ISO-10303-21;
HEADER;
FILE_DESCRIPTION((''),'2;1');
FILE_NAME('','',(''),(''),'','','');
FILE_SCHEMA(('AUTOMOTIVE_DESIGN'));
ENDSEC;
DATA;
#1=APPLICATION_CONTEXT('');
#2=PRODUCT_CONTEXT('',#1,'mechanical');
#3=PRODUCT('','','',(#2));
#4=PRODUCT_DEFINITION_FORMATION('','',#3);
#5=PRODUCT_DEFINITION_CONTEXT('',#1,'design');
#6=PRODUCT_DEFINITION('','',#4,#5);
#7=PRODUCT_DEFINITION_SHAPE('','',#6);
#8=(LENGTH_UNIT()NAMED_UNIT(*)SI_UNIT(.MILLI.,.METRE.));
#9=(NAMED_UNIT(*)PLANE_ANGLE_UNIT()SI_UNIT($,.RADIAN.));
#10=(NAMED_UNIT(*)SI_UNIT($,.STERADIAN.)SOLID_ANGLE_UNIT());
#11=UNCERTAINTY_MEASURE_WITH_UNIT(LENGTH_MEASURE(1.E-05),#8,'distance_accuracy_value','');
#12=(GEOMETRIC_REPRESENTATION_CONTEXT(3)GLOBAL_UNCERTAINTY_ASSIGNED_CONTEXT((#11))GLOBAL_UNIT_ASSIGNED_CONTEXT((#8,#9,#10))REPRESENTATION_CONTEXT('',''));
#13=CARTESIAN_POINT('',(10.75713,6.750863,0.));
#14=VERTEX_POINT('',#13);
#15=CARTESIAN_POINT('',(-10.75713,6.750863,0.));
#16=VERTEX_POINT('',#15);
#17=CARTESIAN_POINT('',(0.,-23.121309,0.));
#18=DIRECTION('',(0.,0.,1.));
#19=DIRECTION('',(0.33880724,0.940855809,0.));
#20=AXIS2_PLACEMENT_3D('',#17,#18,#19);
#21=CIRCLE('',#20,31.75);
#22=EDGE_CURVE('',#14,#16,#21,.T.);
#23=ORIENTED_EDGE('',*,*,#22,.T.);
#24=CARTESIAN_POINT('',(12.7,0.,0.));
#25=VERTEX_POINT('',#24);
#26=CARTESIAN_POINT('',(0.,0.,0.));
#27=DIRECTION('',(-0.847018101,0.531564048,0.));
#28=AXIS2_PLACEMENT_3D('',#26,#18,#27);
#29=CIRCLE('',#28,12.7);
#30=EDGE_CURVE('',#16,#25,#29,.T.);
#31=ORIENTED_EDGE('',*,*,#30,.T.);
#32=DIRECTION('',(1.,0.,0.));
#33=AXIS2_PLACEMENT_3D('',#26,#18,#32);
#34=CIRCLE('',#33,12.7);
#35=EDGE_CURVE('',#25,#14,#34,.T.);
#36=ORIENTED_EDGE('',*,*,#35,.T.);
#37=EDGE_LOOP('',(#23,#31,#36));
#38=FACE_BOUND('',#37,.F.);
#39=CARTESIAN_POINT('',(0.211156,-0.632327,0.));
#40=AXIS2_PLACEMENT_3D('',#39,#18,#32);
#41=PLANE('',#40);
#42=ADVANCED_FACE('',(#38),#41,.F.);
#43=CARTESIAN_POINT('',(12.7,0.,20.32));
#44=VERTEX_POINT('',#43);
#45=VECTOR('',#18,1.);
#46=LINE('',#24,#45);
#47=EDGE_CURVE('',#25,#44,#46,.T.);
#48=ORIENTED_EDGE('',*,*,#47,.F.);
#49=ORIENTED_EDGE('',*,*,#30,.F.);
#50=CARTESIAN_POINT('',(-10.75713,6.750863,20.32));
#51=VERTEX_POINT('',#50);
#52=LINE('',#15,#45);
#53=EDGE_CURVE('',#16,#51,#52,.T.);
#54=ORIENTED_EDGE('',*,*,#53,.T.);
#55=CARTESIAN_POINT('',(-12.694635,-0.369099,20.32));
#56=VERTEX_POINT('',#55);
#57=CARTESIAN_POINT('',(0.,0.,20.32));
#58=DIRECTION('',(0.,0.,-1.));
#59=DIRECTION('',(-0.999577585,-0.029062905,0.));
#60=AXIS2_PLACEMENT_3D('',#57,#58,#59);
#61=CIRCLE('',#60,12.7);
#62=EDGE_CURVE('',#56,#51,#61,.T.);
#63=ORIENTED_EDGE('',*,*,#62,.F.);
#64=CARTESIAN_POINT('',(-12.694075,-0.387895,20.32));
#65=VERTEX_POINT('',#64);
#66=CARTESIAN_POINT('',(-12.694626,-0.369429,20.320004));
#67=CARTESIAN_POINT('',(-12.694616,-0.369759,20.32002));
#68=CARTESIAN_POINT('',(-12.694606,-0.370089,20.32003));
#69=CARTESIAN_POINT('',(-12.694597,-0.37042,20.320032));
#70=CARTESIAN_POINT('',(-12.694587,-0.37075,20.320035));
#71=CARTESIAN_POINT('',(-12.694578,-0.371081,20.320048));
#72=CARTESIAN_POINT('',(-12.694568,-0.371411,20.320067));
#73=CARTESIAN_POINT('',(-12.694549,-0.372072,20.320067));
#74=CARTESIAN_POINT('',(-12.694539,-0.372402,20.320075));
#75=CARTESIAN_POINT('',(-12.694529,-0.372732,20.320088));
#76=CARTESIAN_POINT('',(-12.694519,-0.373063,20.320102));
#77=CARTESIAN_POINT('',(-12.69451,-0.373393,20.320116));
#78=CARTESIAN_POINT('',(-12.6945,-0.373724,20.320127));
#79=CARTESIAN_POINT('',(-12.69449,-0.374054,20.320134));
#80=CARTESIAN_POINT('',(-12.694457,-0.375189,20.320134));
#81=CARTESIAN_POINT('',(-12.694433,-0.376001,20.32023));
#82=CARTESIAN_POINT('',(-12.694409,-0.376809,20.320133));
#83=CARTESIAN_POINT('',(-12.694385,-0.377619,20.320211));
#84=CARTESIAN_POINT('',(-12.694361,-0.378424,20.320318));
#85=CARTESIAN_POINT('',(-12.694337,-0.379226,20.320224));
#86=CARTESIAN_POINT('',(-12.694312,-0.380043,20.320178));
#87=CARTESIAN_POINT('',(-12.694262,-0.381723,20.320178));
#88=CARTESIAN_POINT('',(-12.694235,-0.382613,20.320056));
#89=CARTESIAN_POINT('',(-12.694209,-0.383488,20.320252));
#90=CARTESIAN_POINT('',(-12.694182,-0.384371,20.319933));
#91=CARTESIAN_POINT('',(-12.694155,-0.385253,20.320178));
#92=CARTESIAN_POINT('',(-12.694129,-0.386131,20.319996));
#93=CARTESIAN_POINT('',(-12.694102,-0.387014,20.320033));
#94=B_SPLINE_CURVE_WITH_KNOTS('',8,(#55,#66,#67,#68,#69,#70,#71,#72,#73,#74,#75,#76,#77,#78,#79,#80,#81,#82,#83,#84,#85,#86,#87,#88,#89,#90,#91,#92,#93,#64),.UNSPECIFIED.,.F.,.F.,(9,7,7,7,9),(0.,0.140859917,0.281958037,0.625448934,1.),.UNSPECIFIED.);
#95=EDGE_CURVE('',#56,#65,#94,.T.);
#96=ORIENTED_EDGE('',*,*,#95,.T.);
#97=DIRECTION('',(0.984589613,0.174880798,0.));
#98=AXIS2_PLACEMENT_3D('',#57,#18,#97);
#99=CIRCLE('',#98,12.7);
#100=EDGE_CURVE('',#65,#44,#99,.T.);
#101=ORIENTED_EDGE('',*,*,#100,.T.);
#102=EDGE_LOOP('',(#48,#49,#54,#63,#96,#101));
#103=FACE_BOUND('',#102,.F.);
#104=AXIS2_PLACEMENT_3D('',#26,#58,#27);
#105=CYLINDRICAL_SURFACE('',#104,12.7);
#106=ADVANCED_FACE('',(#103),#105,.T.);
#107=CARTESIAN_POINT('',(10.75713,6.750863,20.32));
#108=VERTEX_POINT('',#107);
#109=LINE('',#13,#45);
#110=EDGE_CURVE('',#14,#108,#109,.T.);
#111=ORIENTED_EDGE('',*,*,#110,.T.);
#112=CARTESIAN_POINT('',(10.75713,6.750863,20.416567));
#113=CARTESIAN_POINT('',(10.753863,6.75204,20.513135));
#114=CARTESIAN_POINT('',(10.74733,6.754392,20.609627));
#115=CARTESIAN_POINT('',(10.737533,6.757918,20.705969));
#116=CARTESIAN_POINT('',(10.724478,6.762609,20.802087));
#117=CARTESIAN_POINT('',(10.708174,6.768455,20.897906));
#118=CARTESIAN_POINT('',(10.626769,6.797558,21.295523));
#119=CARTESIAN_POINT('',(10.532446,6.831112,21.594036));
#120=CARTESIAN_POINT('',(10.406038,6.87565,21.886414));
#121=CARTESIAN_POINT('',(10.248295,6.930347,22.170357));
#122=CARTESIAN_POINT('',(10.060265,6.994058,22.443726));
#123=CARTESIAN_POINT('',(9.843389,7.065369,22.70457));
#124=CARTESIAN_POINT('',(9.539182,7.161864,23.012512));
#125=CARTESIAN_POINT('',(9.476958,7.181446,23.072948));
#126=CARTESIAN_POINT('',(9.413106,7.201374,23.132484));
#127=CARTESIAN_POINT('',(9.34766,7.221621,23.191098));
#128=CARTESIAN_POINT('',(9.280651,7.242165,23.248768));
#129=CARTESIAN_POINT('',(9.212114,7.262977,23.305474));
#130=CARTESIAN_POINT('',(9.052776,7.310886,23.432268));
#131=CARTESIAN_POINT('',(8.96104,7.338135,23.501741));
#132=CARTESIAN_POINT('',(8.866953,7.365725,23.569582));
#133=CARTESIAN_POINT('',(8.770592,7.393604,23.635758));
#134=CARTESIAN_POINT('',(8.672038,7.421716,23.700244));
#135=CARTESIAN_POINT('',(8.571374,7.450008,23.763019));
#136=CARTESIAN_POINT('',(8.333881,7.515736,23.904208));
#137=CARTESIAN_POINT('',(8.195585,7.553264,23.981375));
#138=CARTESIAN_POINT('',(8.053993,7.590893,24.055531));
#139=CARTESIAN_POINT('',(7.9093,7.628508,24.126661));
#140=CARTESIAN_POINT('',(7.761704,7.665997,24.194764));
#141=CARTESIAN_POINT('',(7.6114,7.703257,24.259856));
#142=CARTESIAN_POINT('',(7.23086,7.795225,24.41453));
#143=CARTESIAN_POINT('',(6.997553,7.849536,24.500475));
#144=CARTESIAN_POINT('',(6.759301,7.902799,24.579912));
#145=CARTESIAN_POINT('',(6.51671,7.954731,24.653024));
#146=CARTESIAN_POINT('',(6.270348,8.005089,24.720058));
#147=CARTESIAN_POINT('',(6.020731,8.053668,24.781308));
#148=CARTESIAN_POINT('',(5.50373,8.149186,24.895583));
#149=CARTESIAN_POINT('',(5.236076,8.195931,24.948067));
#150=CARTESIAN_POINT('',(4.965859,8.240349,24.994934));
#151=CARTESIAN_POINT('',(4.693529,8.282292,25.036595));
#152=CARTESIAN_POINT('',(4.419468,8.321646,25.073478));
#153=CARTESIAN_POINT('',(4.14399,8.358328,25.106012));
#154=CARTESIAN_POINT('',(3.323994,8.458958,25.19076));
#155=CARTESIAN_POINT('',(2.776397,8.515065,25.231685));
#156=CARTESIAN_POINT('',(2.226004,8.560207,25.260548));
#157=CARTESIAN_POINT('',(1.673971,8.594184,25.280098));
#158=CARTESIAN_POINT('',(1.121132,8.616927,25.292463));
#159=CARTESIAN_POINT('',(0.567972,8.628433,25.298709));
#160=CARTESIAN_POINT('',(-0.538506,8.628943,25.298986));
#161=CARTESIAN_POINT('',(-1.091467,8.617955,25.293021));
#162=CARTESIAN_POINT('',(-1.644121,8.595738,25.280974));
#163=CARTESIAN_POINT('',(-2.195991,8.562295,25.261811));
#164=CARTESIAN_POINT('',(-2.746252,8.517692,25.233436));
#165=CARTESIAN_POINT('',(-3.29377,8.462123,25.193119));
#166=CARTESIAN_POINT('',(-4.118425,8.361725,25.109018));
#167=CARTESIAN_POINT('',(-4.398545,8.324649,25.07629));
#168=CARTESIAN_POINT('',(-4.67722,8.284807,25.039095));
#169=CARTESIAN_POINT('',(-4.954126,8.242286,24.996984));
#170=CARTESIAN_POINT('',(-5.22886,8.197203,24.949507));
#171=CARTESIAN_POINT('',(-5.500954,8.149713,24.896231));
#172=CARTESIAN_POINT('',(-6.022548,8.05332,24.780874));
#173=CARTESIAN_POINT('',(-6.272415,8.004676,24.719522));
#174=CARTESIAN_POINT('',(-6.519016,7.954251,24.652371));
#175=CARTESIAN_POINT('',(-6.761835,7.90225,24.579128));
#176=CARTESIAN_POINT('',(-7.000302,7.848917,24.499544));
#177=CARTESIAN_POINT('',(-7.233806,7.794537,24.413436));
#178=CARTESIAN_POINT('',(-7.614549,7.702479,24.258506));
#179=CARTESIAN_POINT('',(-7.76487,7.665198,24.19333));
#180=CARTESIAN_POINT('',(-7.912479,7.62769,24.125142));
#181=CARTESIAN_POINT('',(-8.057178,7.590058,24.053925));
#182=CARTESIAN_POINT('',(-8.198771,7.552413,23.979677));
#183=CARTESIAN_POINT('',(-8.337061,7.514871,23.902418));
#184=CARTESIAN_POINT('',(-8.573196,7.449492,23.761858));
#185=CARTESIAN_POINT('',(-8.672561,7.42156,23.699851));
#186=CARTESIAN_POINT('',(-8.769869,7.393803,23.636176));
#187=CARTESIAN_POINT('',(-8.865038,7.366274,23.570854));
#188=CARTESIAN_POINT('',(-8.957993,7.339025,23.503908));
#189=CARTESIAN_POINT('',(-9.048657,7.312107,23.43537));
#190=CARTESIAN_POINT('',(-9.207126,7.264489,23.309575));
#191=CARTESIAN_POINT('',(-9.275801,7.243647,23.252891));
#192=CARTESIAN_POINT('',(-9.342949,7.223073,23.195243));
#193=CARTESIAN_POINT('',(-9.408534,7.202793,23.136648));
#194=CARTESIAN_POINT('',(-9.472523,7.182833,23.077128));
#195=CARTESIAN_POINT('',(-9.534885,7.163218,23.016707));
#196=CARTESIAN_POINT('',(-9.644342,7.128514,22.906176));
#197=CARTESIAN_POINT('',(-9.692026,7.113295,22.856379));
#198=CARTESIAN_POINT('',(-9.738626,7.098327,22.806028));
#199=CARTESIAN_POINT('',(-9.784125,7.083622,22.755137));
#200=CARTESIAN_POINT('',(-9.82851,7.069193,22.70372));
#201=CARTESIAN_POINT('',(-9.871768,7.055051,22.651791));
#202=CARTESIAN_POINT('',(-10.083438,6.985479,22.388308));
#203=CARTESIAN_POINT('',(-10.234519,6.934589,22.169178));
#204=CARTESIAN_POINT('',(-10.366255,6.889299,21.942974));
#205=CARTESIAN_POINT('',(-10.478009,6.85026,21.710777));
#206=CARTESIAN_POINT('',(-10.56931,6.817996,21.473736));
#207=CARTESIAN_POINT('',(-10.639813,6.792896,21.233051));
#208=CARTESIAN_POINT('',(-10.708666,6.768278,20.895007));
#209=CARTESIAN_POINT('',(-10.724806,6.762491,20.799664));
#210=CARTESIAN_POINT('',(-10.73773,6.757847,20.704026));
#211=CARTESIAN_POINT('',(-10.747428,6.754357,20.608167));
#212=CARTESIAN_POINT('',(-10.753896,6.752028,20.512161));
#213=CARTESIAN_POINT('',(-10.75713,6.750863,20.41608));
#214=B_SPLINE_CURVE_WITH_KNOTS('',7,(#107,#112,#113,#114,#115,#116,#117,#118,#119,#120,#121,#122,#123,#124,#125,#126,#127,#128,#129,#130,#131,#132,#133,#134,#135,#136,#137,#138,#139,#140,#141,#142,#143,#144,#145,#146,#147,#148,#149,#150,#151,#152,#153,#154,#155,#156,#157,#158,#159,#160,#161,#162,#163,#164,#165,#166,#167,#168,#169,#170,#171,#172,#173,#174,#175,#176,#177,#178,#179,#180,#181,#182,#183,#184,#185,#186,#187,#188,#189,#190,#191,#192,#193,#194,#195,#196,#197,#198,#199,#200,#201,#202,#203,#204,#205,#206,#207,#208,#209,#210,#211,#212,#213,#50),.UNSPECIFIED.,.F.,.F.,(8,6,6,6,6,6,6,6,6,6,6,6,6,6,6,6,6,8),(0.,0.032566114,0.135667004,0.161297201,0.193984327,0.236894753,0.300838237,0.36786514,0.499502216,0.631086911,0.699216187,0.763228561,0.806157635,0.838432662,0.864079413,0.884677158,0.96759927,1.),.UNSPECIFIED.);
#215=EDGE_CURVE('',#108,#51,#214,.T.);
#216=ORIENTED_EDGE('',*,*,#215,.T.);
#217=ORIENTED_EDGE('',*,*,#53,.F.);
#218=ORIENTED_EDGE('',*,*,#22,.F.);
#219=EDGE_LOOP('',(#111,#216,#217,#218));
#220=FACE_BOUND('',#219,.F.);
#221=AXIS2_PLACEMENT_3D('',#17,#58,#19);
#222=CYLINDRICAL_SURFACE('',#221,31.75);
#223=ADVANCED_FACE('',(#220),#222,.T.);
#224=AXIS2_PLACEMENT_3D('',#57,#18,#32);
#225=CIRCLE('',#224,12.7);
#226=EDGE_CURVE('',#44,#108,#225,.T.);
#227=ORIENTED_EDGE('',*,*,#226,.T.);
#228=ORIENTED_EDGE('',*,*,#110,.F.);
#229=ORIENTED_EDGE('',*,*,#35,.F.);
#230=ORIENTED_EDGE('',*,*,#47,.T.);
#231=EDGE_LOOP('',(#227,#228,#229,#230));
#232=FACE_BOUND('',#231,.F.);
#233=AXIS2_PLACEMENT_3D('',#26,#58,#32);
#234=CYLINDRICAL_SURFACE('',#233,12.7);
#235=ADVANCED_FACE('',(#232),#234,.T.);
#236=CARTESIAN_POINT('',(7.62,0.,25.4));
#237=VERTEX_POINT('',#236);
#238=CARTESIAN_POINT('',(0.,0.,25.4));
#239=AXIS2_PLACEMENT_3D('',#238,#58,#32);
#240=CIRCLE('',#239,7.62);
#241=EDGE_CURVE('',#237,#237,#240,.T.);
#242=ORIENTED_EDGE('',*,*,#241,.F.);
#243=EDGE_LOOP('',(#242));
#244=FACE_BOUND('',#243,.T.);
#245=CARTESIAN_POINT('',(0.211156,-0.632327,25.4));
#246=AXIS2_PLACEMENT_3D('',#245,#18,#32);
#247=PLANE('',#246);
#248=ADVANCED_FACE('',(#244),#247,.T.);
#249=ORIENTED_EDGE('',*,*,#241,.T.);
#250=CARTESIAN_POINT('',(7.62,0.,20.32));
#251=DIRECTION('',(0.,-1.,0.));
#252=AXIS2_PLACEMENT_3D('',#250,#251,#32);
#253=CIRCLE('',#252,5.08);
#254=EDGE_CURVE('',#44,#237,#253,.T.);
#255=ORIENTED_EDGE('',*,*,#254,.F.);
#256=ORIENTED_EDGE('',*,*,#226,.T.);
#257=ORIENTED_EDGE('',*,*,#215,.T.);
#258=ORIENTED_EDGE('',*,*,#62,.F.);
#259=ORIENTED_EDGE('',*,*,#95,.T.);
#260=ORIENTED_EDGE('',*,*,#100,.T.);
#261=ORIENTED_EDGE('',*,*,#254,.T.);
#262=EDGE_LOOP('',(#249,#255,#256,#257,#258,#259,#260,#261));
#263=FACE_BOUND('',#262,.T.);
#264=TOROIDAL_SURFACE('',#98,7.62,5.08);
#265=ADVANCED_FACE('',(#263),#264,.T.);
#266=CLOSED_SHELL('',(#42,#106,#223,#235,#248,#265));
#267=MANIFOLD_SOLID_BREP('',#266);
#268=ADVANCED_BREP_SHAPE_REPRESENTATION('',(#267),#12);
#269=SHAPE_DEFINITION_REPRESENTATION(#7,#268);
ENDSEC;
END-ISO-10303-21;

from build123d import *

# Parameters (mm, degrees)
F1_DEPTH    = 25.4
F2_T2_ANGLE = 349.9282786253
F2_T4_ANGLE = 169.6280932898


# Not quite as in the source:
# - a fillet or chamfer that OpenCascade refuses, or shapes differently, is made with other operations: its cross-section is extruded or revolved along the edge and cut away or added


with BuildPart() as f1:
    # F0 (on Top) → F1 (new body)
    with BuildSketch(Plane.XY):
        with BuildLine():
            ThreePointArc((-10.7571298777, 6.7508634111), (-3.512438651, -12.2046210397), (12.7, 0))
            ThreePointArc((12.7, 0), (12.2046210397, 3.512438651), (10.7571298777, 6.7508634111))
            ThreePointArc((10.7571298777, 6.7508634111), (0, 8.6286914647), (-10.7571298777, 6.7508634111))
        make_face()
    extrude(amount=F1_DEPTH)

    # F2: fillet of radius 5.08 on 2 edges, made by hand

    # F2_s1 → F2_t2 (revolve, cut)
    with BuildSketch(Plane(origin=(0, 0, 0), x_dir=(0, 0, 1), z_dir=(0.1748807982, -0.9845896132, 0))):
        with BuildLine():
            ThreePointArc((20.32, -12.7), (23.9121024484, -11.2121024484), (25.4, -7.62))
            Line((25.4, -7.62), (25.5016, -7.62))
            Line((25.5016, -7.62), (25.5016, -12.8016))
            Line((25.5016, -12.8016), (20.32, -12.8016))
            Line((20.32, -12.8016), (20.32, -12.7))
        make_face()
    revolve(axis=Axis((0, 0, 25.4), (0, 0, 1)), revolution_arc=F2_T2_ANGLE, mode=Mode.SUBTRACT)

    # F2_s3 → F2_t4 (revolve, cut)
    with BuildSketch(Plane.XZ):
        with BuildLine():
            ThreePointArc((12.7, 20.32), (11.2121024484, 23.9121024484), (7.62, 25.4))
            Line((7.62, 25.4), (7.62, 25.5016))
            Line((7.62, 25.5016), (12.8016, 25.5016))
            Line((12.8016, 25.5016), (12.8016, 20.32))
            Line((12.8016, 20.32), (12.7, 20.32))
        make_face()
    revolve(axis=Axis((0, 0, 25.4), (0, 0, 1)), revolution_arc=F2_T4_ANGLE, mode=Mode.SUBTRACT)


solid = f1.part
